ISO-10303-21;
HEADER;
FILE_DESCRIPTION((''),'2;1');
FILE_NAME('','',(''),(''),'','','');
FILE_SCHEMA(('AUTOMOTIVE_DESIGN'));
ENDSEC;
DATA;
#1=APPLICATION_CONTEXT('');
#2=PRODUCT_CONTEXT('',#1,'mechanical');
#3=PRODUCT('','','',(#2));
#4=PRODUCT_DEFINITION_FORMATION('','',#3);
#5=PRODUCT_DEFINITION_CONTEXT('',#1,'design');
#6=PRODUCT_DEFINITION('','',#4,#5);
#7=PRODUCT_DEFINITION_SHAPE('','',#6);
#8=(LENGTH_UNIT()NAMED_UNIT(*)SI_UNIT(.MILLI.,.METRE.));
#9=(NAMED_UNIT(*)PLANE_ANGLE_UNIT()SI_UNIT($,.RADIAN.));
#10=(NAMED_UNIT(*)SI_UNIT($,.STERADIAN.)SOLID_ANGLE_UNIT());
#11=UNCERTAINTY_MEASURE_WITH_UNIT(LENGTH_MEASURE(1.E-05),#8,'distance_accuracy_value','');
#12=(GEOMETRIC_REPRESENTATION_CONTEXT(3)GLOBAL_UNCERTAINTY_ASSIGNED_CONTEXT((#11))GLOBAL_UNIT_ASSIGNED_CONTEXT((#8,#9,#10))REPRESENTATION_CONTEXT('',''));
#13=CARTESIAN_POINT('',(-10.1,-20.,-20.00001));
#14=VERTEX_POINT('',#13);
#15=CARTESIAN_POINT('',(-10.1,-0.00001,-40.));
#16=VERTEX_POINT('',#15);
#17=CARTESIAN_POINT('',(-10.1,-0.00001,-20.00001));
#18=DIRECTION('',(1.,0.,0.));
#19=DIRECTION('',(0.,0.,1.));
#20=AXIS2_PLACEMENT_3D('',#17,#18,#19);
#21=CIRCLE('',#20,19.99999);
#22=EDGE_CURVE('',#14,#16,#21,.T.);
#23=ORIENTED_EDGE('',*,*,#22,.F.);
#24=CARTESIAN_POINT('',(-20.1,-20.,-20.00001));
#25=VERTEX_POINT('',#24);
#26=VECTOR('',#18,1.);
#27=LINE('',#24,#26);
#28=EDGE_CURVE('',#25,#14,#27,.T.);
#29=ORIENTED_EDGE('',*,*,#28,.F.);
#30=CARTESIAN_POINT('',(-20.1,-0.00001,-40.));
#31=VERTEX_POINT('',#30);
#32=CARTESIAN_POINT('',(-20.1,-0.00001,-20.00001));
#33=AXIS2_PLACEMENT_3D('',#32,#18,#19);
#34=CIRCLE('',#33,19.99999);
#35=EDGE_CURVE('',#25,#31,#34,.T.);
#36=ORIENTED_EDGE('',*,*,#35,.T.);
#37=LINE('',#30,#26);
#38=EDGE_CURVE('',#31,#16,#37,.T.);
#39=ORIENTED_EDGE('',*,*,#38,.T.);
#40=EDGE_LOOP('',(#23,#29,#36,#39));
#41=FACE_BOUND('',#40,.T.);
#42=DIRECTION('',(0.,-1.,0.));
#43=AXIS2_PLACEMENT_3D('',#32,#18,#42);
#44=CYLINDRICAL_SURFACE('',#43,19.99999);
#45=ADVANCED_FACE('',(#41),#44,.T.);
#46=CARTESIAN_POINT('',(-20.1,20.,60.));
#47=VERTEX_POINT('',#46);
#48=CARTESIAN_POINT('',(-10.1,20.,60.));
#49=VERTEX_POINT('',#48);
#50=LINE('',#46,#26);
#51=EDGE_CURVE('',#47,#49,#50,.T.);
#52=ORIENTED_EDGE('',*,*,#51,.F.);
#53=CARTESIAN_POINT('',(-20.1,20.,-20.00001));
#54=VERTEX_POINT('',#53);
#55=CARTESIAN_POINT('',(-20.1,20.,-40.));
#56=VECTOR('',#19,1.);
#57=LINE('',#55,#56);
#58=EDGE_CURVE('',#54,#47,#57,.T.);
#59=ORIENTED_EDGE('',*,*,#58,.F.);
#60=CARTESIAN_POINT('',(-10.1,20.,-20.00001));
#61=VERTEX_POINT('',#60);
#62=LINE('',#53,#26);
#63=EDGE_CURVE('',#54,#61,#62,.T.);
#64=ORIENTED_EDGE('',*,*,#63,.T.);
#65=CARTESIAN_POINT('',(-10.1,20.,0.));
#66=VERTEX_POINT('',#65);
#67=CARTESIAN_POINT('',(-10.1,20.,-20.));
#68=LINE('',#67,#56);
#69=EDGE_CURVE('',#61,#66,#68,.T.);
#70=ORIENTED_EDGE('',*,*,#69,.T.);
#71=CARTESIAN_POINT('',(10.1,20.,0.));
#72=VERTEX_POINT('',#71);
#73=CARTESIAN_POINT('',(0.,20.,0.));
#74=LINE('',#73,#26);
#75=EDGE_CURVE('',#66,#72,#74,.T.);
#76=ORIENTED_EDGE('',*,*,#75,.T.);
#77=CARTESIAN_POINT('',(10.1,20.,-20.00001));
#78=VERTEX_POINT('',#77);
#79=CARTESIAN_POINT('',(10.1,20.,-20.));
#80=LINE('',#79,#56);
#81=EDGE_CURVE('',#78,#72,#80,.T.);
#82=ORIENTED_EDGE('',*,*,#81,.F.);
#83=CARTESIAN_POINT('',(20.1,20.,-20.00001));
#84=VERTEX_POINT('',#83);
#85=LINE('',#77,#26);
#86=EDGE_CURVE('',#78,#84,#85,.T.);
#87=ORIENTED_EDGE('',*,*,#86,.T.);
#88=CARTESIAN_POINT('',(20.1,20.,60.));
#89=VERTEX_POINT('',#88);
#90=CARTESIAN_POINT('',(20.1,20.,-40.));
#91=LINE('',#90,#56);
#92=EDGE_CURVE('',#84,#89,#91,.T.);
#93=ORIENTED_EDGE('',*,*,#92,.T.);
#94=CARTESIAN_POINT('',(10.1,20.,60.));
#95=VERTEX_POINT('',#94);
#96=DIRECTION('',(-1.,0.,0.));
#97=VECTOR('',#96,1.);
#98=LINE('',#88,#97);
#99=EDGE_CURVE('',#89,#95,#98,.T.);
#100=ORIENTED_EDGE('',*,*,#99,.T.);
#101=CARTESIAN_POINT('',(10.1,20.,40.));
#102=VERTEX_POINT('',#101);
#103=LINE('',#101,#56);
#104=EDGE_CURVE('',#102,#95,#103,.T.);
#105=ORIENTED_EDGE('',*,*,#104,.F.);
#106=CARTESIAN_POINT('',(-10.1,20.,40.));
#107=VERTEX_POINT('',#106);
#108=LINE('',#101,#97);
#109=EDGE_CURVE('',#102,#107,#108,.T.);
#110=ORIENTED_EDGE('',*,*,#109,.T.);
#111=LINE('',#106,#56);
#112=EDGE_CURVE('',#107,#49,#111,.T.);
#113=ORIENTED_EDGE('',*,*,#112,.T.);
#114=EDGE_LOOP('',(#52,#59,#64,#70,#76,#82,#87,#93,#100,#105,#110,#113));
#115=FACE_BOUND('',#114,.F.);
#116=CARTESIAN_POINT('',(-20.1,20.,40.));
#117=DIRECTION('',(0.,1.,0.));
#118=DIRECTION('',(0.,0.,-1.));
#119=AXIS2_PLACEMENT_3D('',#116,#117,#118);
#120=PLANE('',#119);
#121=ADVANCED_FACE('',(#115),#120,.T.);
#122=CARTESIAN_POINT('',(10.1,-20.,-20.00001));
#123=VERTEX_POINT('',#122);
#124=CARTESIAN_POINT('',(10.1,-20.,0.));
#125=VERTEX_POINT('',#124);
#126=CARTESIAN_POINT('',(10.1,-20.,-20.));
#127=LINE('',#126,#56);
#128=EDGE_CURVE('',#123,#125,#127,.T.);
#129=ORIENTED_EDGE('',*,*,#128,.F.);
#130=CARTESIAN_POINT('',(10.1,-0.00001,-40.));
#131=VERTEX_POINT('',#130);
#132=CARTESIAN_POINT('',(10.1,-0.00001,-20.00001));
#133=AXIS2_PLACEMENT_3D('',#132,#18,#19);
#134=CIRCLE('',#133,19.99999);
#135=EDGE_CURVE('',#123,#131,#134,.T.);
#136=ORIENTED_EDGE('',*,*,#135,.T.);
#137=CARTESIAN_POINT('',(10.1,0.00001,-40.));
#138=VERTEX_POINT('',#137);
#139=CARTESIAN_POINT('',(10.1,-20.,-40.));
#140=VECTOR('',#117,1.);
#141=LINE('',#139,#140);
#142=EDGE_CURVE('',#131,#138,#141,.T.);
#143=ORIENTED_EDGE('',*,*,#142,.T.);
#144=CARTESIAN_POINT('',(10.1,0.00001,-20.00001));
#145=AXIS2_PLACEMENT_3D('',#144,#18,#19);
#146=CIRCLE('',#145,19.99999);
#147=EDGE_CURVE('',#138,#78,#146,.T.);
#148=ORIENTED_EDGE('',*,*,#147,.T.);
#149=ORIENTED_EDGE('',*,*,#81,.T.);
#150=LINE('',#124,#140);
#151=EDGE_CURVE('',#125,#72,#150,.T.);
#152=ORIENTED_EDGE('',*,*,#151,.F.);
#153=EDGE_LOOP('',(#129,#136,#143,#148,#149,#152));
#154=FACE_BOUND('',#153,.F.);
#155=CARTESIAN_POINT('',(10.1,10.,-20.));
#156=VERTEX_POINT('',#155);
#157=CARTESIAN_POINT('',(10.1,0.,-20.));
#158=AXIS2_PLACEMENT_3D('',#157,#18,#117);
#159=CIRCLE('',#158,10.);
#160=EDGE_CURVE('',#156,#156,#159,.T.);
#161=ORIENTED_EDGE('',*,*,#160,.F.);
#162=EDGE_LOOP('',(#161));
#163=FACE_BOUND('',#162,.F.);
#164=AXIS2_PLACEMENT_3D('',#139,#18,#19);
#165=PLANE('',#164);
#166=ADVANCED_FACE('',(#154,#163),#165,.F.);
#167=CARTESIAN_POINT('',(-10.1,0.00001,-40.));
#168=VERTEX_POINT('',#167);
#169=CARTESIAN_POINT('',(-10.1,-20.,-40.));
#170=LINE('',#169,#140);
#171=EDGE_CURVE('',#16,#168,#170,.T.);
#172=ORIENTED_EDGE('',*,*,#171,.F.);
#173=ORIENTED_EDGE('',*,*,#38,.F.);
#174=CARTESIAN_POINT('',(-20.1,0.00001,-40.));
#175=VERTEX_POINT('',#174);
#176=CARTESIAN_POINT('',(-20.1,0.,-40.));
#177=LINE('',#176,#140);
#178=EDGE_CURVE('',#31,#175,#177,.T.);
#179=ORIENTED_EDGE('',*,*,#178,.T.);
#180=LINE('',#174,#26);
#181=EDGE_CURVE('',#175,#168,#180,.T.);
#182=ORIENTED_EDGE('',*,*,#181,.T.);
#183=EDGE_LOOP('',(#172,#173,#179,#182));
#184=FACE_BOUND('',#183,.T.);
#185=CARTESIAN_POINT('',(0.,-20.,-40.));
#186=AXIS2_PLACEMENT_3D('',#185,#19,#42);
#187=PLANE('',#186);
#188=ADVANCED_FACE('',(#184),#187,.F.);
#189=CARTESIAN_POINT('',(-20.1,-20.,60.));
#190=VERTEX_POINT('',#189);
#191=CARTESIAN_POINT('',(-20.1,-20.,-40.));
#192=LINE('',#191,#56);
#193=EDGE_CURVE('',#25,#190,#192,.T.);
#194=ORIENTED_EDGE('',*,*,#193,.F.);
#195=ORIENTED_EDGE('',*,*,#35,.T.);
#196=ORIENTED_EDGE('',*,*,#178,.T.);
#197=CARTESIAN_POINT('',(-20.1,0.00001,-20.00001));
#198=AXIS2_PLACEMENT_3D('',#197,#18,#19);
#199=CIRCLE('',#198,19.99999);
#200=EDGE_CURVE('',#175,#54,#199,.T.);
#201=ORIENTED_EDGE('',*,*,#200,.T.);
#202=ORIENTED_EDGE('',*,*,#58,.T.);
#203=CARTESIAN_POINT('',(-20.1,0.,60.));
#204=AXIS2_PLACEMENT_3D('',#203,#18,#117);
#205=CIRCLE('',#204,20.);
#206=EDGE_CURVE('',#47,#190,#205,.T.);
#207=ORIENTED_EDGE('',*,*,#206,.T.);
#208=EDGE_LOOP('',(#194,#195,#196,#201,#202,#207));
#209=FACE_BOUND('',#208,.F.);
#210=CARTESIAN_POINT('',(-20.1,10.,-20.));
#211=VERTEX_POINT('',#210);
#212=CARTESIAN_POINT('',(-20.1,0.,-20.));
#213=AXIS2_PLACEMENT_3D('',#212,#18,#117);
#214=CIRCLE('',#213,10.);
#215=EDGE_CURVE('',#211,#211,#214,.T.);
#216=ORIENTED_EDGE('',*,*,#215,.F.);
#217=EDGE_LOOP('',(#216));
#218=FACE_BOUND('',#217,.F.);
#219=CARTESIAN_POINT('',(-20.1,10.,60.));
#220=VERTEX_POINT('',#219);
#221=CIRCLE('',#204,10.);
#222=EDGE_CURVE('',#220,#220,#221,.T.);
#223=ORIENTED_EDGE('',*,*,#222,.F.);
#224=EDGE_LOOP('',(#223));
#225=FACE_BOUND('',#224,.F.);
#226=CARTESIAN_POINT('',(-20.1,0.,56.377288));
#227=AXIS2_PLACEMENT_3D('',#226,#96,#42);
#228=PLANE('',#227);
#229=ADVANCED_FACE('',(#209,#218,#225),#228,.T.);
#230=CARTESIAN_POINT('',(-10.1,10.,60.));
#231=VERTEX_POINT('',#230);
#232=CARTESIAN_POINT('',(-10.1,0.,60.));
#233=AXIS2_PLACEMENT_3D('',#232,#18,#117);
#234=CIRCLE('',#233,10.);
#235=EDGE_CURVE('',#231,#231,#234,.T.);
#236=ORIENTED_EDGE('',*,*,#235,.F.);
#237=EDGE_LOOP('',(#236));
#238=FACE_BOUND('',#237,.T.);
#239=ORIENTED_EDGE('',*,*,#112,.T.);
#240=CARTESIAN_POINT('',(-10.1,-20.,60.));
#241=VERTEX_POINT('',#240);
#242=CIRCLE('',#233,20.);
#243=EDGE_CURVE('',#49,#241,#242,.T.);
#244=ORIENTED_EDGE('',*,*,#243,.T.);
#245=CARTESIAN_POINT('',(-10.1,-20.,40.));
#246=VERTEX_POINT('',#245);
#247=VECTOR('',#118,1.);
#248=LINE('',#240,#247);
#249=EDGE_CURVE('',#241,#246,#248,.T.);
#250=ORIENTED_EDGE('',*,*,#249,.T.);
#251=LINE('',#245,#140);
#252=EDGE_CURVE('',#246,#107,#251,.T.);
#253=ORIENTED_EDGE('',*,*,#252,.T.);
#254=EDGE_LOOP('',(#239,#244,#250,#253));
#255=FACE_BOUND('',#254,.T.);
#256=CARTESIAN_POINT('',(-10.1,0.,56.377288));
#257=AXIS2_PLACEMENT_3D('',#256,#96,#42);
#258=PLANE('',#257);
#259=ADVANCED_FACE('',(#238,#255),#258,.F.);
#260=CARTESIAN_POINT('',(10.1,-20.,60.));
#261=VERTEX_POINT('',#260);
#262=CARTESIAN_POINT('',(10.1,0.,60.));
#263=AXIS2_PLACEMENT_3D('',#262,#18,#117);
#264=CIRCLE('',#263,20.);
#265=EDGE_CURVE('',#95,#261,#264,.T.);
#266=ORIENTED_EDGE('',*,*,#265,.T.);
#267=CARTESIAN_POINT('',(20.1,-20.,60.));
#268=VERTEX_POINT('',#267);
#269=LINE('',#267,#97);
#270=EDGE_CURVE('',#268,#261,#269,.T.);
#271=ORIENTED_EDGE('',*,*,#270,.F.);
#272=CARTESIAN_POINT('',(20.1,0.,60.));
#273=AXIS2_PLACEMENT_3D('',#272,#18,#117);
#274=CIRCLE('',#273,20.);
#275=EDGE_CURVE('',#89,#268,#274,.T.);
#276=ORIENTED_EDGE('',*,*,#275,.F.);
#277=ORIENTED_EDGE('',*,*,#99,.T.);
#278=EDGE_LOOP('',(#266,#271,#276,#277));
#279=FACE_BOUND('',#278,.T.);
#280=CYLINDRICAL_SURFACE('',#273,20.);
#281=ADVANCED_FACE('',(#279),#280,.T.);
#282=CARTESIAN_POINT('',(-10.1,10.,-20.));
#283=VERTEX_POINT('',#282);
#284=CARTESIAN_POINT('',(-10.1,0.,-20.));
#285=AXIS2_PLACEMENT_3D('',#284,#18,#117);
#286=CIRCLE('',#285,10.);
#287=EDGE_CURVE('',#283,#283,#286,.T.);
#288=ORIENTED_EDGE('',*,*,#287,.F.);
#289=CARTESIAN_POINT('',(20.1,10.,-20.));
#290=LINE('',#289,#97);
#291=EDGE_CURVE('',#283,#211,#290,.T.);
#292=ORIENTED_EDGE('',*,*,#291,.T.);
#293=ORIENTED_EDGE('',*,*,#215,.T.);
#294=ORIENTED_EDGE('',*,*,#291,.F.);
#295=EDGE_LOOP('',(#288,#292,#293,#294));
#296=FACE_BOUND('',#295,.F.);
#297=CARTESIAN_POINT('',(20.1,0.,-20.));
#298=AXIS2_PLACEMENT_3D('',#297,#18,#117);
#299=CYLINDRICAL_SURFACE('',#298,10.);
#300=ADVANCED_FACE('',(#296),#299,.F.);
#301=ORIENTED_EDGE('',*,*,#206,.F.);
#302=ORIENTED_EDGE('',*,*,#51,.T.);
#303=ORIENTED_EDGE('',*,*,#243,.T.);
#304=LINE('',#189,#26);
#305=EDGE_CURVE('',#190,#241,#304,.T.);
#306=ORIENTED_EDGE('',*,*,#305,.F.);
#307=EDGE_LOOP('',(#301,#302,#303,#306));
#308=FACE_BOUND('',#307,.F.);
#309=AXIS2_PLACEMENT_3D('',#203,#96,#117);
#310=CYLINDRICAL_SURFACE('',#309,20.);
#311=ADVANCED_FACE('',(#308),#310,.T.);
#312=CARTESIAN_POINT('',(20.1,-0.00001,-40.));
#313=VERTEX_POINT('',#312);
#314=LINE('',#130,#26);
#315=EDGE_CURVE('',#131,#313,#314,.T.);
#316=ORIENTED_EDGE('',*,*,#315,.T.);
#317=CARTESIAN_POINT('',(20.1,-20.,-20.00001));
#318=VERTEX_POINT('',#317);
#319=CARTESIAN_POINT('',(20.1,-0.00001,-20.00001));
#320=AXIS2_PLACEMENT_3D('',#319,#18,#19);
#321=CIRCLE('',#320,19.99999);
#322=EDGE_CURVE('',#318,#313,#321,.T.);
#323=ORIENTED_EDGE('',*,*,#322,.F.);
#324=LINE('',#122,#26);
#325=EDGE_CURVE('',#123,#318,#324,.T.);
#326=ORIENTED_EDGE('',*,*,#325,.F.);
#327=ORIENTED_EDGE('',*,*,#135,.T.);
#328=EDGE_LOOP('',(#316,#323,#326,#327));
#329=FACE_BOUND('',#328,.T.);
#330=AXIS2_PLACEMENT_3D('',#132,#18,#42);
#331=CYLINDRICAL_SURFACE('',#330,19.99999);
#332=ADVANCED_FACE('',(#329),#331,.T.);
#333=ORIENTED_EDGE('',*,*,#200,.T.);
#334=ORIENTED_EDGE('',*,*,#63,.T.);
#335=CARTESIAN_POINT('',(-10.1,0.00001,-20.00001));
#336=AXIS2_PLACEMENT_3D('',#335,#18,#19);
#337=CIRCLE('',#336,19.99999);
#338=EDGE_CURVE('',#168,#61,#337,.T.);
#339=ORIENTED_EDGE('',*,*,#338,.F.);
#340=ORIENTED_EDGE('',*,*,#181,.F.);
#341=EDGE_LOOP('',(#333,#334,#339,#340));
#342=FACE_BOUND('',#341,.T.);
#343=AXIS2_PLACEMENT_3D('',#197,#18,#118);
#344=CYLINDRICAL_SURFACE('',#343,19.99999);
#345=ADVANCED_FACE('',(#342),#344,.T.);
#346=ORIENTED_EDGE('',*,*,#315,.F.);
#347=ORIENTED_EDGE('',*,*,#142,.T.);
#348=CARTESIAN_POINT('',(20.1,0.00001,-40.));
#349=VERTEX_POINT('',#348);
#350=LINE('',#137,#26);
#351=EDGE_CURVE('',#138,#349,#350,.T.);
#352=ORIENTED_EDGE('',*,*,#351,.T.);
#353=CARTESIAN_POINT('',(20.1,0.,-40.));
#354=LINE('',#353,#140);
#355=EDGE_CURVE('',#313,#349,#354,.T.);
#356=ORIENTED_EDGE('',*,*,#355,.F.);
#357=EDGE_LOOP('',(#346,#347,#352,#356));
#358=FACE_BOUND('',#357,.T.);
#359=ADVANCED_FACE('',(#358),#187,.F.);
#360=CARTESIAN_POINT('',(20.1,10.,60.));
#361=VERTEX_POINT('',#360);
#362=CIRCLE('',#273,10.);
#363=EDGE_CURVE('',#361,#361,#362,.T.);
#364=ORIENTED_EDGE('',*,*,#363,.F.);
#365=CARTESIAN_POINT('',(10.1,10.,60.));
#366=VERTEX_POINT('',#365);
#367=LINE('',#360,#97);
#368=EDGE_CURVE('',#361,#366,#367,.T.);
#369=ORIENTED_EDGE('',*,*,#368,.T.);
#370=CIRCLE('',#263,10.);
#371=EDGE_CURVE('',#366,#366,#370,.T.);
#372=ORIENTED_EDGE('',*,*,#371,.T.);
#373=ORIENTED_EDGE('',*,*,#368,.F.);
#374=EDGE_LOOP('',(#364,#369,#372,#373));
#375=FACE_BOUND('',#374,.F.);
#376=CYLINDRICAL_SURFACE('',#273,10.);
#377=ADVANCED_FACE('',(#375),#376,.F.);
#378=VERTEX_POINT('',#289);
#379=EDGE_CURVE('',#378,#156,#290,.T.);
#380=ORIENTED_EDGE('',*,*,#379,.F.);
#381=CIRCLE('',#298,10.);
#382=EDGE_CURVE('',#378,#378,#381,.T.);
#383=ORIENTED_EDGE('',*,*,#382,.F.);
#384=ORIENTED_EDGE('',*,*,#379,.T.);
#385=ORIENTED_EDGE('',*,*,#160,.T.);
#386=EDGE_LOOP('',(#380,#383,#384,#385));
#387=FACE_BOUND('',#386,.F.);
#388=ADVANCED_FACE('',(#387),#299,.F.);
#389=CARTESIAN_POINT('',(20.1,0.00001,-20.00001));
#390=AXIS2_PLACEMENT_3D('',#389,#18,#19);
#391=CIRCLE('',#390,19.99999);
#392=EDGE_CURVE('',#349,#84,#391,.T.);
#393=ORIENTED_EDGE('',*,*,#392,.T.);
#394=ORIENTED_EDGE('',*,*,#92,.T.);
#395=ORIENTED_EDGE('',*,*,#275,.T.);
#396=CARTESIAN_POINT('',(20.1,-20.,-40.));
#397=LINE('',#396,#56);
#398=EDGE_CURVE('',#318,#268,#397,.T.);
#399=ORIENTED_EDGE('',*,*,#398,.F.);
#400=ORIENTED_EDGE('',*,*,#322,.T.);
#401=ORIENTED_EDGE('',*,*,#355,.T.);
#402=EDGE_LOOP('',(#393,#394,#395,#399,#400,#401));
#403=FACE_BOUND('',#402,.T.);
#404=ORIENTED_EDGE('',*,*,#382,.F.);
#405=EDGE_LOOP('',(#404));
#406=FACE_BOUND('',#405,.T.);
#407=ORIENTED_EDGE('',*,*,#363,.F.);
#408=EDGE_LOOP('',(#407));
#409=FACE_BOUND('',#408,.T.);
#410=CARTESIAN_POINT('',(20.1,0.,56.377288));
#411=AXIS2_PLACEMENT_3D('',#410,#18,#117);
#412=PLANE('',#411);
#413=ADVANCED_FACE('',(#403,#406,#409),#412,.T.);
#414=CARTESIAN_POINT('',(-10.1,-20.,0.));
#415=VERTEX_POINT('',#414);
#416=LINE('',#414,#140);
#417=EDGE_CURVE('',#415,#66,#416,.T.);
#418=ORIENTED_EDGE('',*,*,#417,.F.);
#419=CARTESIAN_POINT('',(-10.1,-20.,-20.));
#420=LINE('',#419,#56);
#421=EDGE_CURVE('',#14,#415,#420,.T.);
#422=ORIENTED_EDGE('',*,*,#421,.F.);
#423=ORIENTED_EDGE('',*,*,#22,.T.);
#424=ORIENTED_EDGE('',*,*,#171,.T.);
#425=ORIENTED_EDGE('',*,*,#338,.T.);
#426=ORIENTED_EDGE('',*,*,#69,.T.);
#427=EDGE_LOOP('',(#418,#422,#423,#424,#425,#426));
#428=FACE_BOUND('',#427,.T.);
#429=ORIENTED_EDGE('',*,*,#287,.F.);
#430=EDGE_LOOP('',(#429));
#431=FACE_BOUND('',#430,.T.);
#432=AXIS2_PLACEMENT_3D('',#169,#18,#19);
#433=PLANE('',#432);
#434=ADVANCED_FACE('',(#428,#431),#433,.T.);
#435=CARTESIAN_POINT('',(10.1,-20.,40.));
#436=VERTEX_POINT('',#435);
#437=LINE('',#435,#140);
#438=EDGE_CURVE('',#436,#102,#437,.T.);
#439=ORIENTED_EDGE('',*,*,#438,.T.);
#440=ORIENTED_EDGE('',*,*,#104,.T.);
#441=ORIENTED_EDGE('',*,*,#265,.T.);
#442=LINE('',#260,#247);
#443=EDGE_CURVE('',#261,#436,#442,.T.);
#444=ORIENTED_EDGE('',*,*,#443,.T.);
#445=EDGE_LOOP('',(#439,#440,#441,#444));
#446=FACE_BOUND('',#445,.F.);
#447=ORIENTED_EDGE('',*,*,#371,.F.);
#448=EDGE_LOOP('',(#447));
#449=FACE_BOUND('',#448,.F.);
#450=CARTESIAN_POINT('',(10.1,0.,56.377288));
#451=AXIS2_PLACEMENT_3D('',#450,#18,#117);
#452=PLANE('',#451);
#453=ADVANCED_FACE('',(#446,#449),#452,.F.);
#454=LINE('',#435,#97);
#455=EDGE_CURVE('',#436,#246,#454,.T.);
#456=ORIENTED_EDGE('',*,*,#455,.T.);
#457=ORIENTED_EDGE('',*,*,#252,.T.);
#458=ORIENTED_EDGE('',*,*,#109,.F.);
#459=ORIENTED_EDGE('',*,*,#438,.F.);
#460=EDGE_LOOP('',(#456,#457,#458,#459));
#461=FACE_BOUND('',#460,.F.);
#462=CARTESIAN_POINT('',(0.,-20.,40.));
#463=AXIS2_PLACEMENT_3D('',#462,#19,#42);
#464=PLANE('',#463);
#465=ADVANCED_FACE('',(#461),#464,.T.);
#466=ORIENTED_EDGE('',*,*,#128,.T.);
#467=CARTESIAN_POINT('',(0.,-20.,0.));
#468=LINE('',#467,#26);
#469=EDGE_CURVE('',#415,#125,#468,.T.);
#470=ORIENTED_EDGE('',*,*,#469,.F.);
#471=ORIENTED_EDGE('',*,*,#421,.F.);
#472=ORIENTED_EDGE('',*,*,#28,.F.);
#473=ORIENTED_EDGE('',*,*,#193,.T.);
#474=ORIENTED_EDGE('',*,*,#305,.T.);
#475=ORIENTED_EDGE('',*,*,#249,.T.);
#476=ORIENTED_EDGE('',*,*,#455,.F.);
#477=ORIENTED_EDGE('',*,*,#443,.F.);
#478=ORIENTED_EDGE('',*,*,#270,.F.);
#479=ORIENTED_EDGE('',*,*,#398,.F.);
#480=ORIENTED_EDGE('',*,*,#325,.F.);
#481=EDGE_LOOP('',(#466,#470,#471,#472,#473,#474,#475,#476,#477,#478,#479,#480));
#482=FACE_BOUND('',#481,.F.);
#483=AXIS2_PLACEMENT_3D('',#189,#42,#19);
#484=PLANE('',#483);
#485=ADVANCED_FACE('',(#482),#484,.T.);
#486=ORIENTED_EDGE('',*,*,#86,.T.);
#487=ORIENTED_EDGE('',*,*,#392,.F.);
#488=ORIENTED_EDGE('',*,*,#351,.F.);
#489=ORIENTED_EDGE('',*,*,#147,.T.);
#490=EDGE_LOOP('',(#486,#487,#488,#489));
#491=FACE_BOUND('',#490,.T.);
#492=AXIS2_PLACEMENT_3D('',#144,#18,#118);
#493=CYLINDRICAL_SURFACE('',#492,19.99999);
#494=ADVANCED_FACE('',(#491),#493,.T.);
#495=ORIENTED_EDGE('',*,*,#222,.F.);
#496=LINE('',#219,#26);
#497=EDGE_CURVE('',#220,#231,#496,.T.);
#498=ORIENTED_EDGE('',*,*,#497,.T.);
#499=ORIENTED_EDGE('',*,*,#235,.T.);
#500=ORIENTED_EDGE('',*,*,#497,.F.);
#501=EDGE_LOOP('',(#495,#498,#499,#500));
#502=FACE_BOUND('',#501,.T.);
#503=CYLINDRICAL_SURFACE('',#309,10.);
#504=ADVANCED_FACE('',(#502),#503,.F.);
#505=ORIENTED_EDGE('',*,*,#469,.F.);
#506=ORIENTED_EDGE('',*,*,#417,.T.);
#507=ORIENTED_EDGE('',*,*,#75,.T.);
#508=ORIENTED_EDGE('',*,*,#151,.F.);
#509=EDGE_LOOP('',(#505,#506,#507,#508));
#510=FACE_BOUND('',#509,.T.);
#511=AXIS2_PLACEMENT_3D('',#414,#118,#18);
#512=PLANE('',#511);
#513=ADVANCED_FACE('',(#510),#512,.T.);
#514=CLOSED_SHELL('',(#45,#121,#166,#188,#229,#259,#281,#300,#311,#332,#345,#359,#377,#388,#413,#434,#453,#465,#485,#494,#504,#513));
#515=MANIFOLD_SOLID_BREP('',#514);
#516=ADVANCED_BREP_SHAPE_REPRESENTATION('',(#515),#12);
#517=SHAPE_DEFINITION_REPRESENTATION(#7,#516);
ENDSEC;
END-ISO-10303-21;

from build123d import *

# Parameters (mm, degrees)
F0_W     = 40
F0_H     = 80
F1_DEPTH = 20.1
F2_R     = 10
F3_DEPTH = 10
F5_W     = 20.2
F5_H     = 40
F6_DEPTH = 40
F7_R     = 10
F8_DEPTH = 40.2
F9_R     = 19.99999


# Not quite as in the source:
# - a fillet or chamfer is up to 0.001 mm smaller than in the source, because OpenCascade refuses the exact size


with BuildPart() as f1:
    # F0 (on Right) → F1 (new body)
    with BuildSketch(Plane.YZ):
        Rectangle(F0_W, F0_H)
    extrude(amount=F1_DEPTH)

    # F2 (on face) → F3 (join)
    with BuildSketch(Plane.YZ.offset(20.1)):
        with BuildLine():
            Line((-20, 60), (-20, 40))
            Line((-20, 40), (20, 40))
            Line((20, 40), (20, 60))
            ThreePointArc((20, 60), (0, 80), (-20, 60))
        make_face()
        with Locations((0, 60)):
            Circle(F2_R, mode=Mode.SUBTRACT)
    extrude(amount=-F3_DEPTH)

    # F4: F1 across plane


with BuildPart() as f1_1:
    add(f1.part)
    add(f1.part.mirror(Plane.YZ))

    # F5 (on face) → F6 (cut, through all)
    with BuildSketch(Plane.XZ.offset(20)):
        with Locations((0, -20)):
            Rectangle(F5_W, F5_H)
    extrude(amount=-F6_DEPTH, mode=Mode.SUBTRACT)

    # F7 (on face) → F8 (cut, through all)
    with BuildSketch(Plane.YZ.offset(20.1)):
        with Locations((0, -20)):
            Circle(F7_R)
    extrude(amount=-F8_DEPTH, mode=Mode.SUBTRACT)

    # F9 (radius 20 in the source; OpenCascade refuses exactly that, so slightly less here)
    f9_edges = [f1_1.edges().sort_by_distance(p)[0] for p in [
        (15.1, 20, -40),
        (-15.1, 20, -40),
        (15.1, -20, -40),
        (-15.1, -20, -40),
    ]]
    fillet(f9_edges, radius=F9_R)


solid = f1_1.part
